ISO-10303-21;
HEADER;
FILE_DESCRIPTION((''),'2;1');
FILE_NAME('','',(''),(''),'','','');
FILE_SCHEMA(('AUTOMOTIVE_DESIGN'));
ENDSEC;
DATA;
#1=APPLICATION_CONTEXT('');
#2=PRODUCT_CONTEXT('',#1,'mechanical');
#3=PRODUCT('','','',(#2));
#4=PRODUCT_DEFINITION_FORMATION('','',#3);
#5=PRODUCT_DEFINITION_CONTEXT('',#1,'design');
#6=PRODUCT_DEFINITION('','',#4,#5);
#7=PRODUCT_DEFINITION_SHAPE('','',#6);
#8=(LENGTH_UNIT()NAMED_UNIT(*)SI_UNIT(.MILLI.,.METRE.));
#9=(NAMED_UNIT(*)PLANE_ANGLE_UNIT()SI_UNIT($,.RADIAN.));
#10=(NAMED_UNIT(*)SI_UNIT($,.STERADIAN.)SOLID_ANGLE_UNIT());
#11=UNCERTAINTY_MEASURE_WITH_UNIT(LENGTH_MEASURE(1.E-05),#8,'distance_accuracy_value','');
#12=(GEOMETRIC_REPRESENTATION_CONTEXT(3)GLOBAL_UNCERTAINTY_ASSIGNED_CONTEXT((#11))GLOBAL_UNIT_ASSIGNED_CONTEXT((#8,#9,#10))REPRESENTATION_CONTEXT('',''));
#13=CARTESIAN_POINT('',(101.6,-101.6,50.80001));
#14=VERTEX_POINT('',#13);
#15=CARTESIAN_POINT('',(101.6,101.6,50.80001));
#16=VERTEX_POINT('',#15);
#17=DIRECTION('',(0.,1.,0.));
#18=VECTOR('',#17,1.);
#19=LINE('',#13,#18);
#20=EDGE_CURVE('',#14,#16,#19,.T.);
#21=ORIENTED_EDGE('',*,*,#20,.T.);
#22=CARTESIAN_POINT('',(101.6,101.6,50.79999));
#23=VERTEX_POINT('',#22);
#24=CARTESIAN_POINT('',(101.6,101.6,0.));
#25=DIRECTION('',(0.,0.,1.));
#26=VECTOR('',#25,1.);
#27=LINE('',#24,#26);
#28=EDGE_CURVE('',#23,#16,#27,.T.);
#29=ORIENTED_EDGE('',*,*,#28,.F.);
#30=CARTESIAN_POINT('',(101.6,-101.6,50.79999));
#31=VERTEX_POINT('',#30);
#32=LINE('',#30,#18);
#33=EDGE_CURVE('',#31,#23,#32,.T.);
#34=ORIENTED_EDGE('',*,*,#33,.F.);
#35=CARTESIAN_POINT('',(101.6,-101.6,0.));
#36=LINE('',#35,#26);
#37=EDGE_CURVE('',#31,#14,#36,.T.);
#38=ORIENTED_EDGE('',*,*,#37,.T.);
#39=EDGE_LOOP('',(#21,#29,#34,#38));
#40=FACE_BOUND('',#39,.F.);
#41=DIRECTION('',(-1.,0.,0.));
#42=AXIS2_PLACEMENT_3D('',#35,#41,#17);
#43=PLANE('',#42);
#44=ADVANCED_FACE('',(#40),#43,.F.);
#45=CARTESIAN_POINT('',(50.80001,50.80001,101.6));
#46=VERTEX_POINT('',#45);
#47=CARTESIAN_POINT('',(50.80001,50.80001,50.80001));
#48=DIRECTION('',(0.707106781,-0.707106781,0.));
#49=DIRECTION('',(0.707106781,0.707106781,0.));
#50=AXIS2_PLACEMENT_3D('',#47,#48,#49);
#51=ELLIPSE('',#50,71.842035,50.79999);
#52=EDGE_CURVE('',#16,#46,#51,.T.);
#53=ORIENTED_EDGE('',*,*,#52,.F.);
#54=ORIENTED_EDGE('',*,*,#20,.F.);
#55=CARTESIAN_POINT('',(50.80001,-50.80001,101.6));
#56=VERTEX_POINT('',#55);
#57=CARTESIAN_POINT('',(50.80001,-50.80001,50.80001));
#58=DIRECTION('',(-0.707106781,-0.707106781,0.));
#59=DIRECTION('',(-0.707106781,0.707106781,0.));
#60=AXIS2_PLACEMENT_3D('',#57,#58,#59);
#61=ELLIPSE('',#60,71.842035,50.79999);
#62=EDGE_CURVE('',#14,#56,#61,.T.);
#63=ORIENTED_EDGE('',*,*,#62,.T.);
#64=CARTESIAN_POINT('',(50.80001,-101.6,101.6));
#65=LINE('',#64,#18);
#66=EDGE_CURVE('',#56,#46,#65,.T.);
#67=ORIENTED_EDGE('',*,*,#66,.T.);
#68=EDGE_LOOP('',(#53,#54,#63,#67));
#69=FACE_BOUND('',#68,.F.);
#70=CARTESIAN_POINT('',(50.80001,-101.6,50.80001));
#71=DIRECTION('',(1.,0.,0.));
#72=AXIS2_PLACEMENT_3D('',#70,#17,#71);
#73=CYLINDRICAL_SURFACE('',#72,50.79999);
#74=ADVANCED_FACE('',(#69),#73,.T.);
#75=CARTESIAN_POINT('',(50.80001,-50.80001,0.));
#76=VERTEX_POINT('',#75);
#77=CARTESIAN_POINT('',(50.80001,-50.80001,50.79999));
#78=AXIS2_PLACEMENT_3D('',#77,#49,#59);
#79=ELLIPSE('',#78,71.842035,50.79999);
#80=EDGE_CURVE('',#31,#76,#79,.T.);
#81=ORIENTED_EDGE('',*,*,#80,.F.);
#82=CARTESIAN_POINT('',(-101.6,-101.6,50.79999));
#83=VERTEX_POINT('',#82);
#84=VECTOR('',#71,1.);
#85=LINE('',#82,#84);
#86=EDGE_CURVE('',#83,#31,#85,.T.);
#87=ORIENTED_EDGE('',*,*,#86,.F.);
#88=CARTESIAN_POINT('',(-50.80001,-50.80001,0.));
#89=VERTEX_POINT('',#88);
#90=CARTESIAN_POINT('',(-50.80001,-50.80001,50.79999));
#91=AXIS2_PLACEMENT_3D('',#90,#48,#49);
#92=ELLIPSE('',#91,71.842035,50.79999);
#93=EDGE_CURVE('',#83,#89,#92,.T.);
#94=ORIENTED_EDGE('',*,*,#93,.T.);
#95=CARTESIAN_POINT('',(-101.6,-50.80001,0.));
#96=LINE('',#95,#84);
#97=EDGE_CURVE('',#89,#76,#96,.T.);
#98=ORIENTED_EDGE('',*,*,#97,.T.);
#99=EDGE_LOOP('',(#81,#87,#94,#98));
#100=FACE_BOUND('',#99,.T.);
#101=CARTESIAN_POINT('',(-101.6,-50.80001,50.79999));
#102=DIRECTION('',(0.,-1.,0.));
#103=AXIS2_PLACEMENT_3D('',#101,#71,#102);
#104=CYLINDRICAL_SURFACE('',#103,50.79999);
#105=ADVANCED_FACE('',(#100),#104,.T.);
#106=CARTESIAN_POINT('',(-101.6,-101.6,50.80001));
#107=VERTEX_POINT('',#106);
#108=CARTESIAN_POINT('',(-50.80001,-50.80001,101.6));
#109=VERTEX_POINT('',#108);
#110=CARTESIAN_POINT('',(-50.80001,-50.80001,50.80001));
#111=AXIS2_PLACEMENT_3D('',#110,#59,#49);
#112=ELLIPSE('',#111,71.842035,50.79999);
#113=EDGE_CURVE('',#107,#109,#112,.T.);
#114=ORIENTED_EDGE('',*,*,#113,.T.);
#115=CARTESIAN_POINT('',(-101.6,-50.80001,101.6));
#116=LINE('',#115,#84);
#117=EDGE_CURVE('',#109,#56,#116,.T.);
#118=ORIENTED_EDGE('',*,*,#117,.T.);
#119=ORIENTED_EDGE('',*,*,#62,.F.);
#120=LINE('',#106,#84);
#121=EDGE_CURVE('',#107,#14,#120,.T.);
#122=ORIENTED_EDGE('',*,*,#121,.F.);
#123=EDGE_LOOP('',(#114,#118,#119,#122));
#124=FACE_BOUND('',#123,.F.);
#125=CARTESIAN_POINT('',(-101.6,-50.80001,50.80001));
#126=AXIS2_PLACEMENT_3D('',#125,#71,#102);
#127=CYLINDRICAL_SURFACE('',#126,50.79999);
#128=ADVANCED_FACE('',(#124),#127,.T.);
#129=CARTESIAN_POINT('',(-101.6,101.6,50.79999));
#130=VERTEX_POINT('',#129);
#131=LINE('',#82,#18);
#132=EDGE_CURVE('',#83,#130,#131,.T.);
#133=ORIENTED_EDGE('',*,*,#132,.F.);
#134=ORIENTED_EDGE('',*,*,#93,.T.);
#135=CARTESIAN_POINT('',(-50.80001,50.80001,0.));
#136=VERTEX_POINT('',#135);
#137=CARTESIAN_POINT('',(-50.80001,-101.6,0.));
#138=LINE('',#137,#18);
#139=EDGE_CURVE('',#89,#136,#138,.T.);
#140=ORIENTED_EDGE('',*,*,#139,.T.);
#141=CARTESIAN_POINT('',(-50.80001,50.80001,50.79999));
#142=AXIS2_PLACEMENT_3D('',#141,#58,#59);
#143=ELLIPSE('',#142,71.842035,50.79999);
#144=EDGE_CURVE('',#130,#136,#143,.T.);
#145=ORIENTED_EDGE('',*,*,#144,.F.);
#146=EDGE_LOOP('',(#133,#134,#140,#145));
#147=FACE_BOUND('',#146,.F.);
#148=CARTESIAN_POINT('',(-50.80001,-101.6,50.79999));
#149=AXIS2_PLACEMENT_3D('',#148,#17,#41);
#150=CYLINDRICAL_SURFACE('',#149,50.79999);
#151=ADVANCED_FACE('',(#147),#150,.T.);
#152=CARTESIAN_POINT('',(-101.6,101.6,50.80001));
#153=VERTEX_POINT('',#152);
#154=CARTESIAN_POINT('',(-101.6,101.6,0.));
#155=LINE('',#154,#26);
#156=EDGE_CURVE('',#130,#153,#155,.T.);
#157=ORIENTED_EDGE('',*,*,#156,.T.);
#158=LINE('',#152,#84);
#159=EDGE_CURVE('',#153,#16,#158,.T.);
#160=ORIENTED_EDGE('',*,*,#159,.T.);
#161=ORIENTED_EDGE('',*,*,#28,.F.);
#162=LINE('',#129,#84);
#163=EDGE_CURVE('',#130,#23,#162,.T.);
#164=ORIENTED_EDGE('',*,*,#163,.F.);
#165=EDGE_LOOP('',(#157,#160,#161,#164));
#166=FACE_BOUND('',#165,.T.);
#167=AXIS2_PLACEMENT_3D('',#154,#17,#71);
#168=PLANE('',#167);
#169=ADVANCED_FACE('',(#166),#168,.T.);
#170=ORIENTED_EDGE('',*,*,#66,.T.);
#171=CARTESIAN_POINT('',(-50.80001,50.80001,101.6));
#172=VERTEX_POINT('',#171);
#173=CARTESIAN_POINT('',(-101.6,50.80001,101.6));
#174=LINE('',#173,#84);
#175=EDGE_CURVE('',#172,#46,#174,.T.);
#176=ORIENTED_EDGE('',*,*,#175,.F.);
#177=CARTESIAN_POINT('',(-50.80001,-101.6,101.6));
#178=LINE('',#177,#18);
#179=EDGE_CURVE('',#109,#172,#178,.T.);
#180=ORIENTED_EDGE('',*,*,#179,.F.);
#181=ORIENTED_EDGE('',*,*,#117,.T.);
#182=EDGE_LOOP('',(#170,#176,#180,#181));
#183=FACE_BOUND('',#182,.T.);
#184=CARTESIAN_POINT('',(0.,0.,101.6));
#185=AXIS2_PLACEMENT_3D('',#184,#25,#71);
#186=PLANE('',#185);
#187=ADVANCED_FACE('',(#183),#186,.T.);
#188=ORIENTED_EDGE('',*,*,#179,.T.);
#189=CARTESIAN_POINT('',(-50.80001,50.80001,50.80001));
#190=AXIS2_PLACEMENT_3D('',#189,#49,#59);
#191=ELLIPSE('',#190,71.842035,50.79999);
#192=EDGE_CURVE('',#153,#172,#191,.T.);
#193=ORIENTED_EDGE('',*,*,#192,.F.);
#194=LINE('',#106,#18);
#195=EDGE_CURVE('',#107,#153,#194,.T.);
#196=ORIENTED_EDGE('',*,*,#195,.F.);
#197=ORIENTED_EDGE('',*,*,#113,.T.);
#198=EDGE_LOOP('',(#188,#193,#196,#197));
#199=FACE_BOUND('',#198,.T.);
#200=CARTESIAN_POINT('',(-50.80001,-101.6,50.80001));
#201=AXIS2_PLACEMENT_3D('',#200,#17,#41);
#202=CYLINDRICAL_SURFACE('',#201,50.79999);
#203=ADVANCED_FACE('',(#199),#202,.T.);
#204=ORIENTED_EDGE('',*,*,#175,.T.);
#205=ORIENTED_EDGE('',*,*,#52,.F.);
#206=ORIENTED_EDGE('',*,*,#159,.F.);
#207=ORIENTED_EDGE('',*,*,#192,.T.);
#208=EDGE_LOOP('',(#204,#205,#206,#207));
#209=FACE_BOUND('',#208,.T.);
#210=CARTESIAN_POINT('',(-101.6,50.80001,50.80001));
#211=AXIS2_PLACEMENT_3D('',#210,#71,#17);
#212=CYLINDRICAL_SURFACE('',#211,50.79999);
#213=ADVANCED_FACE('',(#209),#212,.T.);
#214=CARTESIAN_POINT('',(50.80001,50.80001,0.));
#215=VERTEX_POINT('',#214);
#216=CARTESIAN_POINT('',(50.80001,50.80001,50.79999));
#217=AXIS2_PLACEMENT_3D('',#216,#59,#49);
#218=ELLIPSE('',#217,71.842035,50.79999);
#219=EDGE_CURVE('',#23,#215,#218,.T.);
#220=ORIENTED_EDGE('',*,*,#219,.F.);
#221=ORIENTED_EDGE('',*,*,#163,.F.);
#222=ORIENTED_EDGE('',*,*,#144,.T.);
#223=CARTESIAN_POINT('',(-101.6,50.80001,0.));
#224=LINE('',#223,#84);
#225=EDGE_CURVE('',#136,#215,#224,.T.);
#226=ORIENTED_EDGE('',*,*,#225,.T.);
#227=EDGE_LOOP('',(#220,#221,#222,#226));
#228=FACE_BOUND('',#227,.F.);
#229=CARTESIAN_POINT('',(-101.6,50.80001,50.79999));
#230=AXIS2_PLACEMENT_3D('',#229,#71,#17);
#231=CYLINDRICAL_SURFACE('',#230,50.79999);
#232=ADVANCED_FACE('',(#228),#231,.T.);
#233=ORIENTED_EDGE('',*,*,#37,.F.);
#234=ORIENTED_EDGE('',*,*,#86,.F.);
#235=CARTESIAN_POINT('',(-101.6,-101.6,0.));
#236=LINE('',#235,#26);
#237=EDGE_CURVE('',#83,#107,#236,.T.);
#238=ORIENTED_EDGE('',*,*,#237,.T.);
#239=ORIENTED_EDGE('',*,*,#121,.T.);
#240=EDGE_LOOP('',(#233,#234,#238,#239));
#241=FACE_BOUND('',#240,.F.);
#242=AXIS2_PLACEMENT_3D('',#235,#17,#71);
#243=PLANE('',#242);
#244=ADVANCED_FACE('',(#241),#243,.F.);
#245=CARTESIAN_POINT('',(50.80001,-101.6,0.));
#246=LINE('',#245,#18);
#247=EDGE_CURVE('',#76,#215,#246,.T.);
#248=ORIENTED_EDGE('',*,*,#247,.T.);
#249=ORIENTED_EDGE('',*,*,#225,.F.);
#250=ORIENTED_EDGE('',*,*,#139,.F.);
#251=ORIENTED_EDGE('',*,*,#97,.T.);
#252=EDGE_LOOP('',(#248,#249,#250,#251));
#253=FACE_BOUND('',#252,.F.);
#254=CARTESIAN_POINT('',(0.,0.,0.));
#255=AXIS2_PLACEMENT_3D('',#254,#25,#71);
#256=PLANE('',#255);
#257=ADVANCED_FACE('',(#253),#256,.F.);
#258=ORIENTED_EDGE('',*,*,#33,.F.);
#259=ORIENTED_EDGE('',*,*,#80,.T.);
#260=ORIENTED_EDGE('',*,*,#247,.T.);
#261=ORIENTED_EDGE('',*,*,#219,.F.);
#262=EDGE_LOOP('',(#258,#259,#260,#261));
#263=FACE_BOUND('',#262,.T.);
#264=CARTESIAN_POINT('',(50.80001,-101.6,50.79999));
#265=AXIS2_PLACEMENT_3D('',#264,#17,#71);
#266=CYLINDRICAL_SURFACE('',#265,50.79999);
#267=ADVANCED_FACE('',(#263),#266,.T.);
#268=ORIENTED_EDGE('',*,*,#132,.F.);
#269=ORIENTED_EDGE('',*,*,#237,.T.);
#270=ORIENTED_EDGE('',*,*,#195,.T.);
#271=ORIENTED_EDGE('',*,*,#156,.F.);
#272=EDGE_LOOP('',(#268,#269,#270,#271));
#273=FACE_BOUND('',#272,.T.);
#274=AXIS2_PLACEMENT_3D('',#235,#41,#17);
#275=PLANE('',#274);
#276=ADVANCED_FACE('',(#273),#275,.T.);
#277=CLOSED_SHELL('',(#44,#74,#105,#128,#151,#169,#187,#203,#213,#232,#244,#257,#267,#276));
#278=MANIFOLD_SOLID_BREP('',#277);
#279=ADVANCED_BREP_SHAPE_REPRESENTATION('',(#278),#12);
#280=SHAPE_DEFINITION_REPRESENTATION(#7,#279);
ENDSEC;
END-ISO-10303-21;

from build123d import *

# Parameters (mm, degrees)
F0_W     = 203.2
F0_H     = 203.2
F1_DEPTH = 101.6
F2_R     = 50.79999


# Not quite as in the source:
# - a fillet or chamfer is up to 0.001 mm smaller than in the source, because OpenCascade refuses the exact size


with BuildPart() as f1:
    # F0 (on Top) → F1 (new body)
    with BuildSketch(Plane.XY):
        Rectangle(F0_W, F0_H)
    extrude(amount=F1_DEPTH)

    # F2 (radius 50.8 in the source; OpenCascade refuses exactly that, so slightly less here)
    f2_edges = [f1.edges().sort_by_distance(p)[0] for p in [
        (-101.6, 0, 101.6),
        (-101.6, 0, 0),
        (101.6, 0, 0),
        (101.6, 0, 101.6),
        (0, -101.6, 101.6),
        (0, -101.6, 0),
        (0, 101.6, 101.6),
        (0, 101.6, 0),
    ]]
    fillet(f2_edges, radius=F2_R)


solid = f1.part
